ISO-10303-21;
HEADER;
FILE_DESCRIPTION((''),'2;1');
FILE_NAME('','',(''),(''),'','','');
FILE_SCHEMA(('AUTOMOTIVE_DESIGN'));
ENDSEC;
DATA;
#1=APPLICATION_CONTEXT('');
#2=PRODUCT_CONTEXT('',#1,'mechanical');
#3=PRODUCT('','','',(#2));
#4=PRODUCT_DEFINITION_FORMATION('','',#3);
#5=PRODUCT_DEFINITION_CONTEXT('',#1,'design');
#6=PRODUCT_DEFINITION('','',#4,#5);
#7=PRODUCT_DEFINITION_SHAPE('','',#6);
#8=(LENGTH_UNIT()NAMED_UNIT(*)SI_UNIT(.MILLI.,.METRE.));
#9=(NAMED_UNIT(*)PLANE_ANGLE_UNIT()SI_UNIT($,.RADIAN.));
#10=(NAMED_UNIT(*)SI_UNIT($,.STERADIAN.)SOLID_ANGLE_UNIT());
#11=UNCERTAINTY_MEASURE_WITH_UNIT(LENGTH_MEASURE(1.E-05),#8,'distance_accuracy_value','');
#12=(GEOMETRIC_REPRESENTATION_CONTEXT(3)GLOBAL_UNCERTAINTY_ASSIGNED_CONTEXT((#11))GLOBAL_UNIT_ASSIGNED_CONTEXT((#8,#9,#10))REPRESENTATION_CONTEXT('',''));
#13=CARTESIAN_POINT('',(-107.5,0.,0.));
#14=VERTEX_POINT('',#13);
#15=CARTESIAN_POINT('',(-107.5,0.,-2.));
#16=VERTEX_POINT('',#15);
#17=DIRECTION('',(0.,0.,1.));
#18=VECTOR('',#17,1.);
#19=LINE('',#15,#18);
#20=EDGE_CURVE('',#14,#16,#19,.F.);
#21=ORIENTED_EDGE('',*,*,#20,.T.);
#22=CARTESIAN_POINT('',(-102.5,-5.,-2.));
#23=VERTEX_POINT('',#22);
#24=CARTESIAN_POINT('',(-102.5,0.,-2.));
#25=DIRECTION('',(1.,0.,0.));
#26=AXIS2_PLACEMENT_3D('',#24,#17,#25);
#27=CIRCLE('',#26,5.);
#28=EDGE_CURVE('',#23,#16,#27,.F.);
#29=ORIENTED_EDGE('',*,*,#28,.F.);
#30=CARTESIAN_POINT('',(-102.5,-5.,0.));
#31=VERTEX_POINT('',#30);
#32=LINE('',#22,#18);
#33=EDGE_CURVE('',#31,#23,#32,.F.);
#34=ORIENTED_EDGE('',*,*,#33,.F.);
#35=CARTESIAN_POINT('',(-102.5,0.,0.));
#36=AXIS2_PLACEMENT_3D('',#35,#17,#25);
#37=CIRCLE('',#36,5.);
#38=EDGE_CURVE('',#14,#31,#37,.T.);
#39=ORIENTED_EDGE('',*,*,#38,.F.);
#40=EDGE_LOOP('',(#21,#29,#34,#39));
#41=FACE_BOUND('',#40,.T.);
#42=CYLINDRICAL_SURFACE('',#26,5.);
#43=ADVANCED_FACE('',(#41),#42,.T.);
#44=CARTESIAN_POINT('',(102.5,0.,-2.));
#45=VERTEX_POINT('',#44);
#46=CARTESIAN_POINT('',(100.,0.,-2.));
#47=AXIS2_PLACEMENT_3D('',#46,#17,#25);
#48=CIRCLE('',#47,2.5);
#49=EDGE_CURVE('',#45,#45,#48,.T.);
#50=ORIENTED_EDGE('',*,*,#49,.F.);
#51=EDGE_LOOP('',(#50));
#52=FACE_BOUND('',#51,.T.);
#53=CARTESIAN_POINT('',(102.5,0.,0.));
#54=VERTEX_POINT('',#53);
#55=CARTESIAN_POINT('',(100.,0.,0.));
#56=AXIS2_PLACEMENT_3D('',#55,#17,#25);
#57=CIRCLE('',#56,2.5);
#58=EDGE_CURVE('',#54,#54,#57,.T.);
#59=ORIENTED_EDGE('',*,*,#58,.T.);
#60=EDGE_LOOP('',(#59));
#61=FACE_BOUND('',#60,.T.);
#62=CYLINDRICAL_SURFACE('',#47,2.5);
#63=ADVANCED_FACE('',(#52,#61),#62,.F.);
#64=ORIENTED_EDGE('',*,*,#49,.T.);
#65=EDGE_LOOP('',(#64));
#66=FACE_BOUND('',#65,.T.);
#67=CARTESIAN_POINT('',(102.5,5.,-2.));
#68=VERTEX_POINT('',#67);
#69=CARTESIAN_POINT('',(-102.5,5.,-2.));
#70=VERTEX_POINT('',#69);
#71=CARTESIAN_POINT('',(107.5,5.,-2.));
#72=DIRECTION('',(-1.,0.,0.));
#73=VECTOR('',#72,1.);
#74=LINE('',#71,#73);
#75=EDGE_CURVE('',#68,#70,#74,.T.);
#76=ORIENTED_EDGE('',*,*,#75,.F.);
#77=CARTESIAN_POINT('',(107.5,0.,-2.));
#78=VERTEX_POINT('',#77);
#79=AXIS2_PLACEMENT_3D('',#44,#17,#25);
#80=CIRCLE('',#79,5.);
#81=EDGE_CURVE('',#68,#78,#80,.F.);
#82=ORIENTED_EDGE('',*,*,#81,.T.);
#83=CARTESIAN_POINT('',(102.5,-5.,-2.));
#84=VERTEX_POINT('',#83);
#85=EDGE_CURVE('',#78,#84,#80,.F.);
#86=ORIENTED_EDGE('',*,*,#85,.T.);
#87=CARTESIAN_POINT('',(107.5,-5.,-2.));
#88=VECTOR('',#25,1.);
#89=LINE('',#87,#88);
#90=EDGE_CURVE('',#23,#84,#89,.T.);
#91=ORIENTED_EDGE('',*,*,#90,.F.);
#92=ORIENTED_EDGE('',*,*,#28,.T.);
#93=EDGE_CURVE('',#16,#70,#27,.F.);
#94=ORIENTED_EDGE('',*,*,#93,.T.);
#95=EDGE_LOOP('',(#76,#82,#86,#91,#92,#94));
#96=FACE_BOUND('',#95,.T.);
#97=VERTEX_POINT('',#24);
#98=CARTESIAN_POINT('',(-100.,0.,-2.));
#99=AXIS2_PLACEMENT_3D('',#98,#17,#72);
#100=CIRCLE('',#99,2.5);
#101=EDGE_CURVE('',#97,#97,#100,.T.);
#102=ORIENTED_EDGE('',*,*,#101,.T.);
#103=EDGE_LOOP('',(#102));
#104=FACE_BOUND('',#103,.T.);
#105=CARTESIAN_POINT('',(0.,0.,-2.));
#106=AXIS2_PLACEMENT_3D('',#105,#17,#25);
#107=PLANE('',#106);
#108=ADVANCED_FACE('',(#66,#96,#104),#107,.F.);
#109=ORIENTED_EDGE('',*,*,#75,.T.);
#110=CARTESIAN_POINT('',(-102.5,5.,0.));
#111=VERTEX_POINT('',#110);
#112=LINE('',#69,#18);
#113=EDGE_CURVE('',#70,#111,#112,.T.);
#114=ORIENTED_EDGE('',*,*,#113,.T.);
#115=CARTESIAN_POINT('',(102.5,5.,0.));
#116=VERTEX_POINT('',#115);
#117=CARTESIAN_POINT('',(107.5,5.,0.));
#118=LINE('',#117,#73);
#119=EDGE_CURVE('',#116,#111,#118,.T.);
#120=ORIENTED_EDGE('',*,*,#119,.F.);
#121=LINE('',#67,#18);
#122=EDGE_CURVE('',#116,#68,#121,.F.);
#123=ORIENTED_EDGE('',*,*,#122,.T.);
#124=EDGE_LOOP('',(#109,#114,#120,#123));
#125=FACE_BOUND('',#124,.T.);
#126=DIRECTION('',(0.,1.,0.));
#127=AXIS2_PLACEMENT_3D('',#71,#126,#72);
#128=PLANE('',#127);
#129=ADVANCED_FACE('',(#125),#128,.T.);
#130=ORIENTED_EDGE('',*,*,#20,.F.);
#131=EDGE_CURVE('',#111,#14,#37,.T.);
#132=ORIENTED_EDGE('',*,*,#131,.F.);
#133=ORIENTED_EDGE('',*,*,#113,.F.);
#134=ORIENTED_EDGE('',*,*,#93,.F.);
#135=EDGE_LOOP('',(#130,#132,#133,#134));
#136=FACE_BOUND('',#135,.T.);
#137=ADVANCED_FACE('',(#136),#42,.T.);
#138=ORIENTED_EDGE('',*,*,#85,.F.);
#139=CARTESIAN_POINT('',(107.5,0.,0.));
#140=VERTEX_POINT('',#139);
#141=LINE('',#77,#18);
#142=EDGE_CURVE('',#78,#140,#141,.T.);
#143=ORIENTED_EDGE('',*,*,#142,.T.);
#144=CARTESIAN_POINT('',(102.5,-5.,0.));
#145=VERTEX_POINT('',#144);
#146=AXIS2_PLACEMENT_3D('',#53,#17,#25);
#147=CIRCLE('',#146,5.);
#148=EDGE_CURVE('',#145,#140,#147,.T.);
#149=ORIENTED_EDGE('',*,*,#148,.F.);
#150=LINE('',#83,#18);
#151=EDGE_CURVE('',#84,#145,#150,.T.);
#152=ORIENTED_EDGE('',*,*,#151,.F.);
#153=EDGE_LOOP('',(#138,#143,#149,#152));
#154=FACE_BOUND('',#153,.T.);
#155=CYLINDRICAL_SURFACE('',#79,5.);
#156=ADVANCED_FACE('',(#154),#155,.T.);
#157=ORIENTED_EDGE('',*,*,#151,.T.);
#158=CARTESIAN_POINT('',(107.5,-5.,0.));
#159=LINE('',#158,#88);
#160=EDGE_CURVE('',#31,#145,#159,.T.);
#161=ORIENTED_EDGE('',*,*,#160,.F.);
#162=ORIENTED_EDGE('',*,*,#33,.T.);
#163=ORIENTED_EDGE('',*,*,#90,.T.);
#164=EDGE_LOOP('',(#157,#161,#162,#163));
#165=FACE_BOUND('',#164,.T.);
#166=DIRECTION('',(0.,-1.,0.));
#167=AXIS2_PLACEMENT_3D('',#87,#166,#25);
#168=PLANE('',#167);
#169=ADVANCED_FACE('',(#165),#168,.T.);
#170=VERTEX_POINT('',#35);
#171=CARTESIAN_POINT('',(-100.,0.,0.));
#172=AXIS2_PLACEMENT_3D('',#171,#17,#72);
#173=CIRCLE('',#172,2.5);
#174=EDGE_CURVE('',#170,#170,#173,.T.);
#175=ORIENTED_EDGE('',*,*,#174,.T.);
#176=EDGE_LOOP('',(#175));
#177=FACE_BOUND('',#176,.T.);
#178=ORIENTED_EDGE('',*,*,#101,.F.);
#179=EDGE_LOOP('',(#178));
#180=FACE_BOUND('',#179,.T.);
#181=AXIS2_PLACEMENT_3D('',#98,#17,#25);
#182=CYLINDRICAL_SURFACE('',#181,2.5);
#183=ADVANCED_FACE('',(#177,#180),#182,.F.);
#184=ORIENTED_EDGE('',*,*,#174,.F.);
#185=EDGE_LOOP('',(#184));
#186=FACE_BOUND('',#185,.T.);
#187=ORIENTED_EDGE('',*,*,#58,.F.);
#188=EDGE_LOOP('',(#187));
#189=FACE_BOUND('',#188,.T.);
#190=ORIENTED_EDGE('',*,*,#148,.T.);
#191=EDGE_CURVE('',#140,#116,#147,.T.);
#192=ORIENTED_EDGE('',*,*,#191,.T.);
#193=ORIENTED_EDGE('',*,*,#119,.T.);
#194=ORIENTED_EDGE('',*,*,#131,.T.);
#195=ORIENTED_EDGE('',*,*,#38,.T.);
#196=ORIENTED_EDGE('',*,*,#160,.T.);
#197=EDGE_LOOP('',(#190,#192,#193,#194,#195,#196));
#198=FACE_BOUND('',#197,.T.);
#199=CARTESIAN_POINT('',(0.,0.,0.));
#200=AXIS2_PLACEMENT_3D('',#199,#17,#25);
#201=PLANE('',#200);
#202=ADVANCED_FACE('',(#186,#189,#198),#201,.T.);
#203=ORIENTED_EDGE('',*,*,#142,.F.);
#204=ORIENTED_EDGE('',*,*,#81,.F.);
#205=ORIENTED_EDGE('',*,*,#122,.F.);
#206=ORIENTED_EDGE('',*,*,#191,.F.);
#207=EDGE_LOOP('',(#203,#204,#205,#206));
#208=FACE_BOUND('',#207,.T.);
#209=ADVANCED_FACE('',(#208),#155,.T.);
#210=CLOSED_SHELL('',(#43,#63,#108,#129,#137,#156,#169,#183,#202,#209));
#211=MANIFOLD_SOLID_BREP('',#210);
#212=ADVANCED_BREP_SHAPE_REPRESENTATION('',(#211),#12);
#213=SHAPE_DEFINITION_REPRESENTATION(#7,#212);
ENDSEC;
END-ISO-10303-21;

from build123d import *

# Parameters (mm, degrees)
SKETCH_1_W             = 215
SKETCH_1_H             = 10
SM_BASE_FLANGE_1_DEPTH = 2
SKETCH_6_R             = 2.5
CUT_EXTRUDE_1_DEPTH    = 108.634799205
FILLET_1_R             = 5


# Sheet-metal steps are written as plain solids
with BuildPart() as part:
    # Sketch 1 → Базовая кромка1 (new body)
    with BuildSketch(Plane.XY):
        Rectangle(SKETCH_1_W, SKETCH_1_H)
    extrude(amount=-SM_BASE_FLANGE_1_DEPTH)

    # Эскиз6 → Вырез-Вытянуть1 (cut, through all)
    with BuildSketch(Plane.XY):
        with Locations((100, 0)):
            Circle(SKETCH_6_R)
        with Locations(Location((-100, 0, 0), (0, 0, 180))):
            Circle(SKETCH_6_R)
    extrude(amount=-CUT_EXTRUDE_1_DEPTH, mode=Mode.SUBTRACT)

    # Скругление1
    fillet_1_edges = [part.edges().sort_by_distance(p)[0] for p in [
        (107.5, -5, -1),
        (107.5, 5, -1),
        (-107.5, -5, -1),
        (-107.5, 5, -1),
    ]]
    fillet(fillet_1_edges, radius=FILLET_1_R - 0.0001)  # a hair under: the kernel refuses the full size


solid = part.part
